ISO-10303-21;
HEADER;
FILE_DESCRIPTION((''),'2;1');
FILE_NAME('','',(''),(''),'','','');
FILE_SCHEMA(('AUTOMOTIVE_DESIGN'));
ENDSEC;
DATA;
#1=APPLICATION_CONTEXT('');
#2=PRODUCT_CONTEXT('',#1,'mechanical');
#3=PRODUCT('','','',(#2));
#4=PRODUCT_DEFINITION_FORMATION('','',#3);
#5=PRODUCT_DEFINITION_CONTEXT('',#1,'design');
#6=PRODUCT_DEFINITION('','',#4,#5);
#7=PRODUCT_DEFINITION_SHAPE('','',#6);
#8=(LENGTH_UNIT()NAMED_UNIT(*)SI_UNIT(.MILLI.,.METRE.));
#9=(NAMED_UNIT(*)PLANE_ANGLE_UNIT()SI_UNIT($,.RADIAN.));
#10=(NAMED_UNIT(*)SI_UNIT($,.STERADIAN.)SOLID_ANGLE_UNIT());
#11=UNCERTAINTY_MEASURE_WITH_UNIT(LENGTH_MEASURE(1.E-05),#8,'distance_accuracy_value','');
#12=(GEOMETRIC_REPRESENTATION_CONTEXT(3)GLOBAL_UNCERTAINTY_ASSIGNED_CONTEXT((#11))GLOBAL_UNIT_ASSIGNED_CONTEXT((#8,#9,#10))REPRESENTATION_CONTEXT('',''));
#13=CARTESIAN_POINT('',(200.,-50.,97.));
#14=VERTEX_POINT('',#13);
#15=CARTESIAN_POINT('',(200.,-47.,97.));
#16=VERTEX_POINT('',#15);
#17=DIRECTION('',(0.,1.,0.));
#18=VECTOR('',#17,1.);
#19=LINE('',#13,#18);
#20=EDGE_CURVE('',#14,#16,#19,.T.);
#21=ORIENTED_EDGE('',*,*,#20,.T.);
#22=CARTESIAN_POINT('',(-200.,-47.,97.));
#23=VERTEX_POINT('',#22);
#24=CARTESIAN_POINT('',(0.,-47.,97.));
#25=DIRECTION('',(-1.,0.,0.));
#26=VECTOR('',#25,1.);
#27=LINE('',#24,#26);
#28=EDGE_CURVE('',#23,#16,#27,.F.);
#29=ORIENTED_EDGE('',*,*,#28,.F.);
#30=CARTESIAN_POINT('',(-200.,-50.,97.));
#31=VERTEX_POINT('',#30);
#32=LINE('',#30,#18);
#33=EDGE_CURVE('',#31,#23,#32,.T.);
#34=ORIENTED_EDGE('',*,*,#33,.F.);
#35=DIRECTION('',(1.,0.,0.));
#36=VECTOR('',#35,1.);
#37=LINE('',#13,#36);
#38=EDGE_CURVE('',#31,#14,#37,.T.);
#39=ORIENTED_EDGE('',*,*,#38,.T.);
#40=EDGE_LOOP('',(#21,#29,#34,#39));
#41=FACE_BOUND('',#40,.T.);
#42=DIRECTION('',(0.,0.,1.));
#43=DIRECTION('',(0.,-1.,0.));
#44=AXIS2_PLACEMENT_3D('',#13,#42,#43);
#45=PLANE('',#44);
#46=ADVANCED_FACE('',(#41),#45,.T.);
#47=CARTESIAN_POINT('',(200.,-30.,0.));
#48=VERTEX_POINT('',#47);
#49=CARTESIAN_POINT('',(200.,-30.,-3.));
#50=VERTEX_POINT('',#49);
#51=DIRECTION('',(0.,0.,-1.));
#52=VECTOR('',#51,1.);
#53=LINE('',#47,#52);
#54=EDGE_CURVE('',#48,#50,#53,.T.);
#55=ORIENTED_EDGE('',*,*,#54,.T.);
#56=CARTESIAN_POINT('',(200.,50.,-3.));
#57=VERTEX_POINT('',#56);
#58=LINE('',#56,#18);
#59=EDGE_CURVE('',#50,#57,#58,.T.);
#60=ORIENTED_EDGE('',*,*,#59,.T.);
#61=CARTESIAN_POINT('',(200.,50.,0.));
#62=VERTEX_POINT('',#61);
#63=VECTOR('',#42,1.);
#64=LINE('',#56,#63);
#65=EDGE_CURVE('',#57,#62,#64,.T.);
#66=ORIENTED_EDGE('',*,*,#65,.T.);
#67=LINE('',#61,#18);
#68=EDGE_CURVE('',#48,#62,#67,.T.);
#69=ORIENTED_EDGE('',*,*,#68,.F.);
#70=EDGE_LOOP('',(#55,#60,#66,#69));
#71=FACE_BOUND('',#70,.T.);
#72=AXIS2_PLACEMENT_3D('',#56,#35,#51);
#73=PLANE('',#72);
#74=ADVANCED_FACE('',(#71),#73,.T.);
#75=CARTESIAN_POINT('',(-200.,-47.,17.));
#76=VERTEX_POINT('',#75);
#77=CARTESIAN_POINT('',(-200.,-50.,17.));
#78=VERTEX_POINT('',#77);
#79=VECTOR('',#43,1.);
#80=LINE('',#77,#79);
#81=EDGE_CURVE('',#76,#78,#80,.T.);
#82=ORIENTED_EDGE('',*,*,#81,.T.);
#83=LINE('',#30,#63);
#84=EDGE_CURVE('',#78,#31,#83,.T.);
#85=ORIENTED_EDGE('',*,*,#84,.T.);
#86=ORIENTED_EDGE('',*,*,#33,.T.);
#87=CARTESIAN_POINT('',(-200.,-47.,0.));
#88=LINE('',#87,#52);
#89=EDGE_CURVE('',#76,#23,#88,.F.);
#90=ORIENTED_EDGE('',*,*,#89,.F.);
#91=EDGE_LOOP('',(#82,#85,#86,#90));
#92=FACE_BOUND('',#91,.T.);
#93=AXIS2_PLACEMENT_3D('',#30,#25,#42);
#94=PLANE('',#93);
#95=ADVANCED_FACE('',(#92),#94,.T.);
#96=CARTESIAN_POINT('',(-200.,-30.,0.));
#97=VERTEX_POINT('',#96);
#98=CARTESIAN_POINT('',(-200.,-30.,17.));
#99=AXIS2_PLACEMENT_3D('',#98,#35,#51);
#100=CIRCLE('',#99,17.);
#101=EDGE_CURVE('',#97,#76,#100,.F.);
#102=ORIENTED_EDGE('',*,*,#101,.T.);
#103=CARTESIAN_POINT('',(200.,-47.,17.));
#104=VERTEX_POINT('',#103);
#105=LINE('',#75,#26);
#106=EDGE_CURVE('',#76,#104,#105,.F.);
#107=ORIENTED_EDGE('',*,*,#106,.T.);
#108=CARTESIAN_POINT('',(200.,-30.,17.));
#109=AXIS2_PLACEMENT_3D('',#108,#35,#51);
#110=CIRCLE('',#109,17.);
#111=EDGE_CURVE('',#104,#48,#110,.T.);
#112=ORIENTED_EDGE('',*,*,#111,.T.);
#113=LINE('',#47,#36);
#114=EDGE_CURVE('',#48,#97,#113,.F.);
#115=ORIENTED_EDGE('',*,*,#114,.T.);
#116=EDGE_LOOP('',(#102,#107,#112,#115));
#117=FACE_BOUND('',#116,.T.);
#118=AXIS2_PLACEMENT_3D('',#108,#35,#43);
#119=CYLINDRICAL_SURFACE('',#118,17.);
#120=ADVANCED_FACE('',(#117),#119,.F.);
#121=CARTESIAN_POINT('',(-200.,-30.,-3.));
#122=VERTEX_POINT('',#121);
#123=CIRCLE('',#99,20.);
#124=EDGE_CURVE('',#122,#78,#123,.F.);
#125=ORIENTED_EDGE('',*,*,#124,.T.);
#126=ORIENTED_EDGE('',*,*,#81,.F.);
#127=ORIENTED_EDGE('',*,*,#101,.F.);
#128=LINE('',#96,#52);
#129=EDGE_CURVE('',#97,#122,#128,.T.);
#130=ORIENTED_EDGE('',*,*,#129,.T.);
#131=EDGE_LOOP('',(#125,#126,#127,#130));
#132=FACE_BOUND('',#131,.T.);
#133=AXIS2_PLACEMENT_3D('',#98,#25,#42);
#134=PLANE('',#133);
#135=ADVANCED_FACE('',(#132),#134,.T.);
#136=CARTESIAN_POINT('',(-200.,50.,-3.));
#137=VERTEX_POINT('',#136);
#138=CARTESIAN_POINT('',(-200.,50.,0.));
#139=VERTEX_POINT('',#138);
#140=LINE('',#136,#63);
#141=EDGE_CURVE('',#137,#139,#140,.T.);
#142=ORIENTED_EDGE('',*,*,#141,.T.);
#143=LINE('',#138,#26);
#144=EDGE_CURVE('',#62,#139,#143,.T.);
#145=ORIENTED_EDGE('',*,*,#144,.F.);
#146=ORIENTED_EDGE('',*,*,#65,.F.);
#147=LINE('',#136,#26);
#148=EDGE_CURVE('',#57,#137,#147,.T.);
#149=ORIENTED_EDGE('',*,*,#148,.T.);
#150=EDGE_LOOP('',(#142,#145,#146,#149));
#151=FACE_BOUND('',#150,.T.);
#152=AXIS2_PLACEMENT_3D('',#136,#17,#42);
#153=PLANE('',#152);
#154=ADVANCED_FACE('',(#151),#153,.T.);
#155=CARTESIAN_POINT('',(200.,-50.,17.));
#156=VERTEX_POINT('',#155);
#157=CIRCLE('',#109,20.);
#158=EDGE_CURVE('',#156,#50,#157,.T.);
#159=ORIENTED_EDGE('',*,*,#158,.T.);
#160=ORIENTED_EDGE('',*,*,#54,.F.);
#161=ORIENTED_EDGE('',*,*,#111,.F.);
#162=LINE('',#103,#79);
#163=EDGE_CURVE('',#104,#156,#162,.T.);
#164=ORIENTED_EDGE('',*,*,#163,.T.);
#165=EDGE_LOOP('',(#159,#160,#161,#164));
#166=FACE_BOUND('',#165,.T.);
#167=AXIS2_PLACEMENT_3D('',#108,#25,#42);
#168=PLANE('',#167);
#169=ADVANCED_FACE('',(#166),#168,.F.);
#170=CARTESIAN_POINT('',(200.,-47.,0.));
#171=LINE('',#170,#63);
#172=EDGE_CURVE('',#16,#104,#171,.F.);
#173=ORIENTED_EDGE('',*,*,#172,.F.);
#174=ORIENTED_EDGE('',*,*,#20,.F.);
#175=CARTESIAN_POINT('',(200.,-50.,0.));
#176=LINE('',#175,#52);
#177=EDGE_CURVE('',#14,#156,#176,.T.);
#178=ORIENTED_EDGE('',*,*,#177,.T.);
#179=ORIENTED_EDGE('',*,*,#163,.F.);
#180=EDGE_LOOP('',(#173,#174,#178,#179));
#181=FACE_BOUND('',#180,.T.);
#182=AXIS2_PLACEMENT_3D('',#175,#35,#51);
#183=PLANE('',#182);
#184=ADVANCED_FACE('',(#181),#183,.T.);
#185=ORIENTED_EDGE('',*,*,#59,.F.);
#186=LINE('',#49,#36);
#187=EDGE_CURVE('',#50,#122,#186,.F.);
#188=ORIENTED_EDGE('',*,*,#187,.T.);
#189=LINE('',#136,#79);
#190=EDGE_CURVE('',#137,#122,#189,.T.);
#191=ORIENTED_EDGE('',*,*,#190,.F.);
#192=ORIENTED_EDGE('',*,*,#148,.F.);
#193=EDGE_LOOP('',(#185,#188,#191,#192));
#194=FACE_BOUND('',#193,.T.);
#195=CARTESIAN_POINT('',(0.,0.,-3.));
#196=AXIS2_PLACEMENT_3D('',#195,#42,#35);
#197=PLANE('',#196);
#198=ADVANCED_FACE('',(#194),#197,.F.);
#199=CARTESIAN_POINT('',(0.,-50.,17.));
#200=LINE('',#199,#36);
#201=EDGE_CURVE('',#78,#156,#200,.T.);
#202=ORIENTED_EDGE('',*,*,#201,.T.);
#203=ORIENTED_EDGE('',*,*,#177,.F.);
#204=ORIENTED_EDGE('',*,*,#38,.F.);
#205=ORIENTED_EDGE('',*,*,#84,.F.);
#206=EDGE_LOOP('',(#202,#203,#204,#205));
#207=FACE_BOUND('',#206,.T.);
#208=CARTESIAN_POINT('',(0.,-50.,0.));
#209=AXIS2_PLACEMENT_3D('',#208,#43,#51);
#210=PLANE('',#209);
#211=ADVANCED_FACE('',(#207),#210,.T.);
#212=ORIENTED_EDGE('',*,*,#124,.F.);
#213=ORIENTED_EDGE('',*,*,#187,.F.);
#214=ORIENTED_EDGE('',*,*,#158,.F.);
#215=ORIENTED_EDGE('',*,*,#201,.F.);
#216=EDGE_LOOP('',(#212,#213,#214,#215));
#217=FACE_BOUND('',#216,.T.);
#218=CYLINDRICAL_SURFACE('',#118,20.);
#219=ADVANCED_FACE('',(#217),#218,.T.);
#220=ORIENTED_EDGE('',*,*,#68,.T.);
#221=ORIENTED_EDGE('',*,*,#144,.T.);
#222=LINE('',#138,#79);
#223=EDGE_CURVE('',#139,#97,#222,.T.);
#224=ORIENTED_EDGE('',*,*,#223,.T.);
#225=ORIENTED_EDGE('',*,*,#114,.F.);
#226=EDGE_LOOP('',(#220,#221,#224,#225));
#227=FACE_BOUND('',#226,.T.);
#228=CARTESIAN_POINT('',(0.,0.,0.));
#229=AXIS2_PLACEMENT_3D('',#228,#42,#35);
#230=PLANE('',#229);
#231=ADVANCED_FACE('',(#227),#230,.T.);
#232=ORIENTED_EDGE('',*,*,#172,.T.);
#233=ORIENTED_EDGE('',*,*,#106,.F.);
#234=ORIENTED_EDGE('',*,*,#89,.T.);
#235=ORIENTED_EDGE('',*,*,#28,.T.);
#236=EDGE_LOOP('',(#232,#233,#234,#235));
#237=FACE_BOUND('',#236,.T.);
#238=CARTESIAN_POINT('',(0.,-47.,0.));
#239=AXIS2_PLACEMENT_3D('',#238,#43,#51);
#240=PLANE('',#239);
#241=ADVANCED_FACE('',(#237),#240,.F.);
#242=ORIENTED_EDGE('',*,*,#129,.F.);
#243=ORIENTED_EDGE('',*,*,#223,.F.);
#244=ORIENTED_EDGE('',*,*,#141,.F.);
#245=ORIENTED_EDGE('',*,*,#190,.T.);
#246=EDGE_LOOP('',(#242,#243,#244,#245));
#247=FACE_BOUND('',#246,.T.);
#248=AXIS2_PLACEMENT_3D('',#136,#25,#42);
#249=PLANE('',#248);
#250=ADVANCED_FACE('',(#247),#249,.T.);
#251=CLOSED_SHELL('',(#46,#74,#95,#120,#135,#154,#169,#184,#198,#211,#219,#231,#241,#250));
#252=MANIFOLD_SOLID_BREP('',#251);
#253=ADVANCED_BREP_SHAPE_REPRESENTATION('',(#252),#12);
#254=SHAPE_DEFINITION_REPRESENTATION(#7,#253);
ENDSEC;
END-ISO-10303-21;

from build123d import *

# Parameters (mm, degrees)
SKETCH_2_W                       = 400
SKETCH_2_H                       = 100
SM_BASE_FLANGE_1_DEPTH           = 3
SM_EDGE_FLANGE_1_STRIP_W         = 46
SM_EDGE_FLANGE_1_STRIP_H         = 3
SM_EDGE_FLANGE_1_STRIP_CUT_DEPTH = 400
SM_EDGE_FLANGE_1_DEPTH           = 400


# Sheet-metal steps are written as plain solids
with BuildPart() as part:
    # Sketch 2 → 基体-法兰1 (new body)
    with BuildSketch(Plane.XY):
        Rectangle(SKETCH_2_W, SKETCH_2_H)
    extrude(amount=-SM_BASE_FLANGE_1_DEPTH)

    # 边线-法兰1 strip (across the edge) → 边线-法兰1 strip cut (cut)
    with BuildSketch(Plane(origin=(-200, -50, 0), x_dir=(0, 1, 0), z_dir=(1, 0, 0))):
        with Locations((-3, -1.5)):
            Rectangle(SM_EDGE_FLANGE_1_STRIP_W, SM_EDGE_FLANGE_1_STRIP_H)
    extrude(amount=SM_EDGE_FLANGE_1_STRIP_CUT_DEPTH, mode=Mode.SUBTRACT)

    # 边线-法兰1 section (across the edge) → 边线-法兰1 (add)
    with BuildSketch(Plane(origin=(-200, -50, 0), x_dir=(0, 1, 0), z_dir=(1, 0, 0))):
        with BuildLine():
            Line((0, 17), (0, 97))
            Line((0, 97), (3, 97))
            Line((3, 97), (3, 17))
            ThreePointArc((3, 17), (7.97918472, 4.97918472), (20, 0))
            Line((20, 0), (20, -3))
            ThreePointArc((20, -3), (5.857864376, 2.857864376), (0, 17))
        make_face()
    extrude(amount=SM_EDGE_FLANGE_1_DEPTH)


solid = part.part
